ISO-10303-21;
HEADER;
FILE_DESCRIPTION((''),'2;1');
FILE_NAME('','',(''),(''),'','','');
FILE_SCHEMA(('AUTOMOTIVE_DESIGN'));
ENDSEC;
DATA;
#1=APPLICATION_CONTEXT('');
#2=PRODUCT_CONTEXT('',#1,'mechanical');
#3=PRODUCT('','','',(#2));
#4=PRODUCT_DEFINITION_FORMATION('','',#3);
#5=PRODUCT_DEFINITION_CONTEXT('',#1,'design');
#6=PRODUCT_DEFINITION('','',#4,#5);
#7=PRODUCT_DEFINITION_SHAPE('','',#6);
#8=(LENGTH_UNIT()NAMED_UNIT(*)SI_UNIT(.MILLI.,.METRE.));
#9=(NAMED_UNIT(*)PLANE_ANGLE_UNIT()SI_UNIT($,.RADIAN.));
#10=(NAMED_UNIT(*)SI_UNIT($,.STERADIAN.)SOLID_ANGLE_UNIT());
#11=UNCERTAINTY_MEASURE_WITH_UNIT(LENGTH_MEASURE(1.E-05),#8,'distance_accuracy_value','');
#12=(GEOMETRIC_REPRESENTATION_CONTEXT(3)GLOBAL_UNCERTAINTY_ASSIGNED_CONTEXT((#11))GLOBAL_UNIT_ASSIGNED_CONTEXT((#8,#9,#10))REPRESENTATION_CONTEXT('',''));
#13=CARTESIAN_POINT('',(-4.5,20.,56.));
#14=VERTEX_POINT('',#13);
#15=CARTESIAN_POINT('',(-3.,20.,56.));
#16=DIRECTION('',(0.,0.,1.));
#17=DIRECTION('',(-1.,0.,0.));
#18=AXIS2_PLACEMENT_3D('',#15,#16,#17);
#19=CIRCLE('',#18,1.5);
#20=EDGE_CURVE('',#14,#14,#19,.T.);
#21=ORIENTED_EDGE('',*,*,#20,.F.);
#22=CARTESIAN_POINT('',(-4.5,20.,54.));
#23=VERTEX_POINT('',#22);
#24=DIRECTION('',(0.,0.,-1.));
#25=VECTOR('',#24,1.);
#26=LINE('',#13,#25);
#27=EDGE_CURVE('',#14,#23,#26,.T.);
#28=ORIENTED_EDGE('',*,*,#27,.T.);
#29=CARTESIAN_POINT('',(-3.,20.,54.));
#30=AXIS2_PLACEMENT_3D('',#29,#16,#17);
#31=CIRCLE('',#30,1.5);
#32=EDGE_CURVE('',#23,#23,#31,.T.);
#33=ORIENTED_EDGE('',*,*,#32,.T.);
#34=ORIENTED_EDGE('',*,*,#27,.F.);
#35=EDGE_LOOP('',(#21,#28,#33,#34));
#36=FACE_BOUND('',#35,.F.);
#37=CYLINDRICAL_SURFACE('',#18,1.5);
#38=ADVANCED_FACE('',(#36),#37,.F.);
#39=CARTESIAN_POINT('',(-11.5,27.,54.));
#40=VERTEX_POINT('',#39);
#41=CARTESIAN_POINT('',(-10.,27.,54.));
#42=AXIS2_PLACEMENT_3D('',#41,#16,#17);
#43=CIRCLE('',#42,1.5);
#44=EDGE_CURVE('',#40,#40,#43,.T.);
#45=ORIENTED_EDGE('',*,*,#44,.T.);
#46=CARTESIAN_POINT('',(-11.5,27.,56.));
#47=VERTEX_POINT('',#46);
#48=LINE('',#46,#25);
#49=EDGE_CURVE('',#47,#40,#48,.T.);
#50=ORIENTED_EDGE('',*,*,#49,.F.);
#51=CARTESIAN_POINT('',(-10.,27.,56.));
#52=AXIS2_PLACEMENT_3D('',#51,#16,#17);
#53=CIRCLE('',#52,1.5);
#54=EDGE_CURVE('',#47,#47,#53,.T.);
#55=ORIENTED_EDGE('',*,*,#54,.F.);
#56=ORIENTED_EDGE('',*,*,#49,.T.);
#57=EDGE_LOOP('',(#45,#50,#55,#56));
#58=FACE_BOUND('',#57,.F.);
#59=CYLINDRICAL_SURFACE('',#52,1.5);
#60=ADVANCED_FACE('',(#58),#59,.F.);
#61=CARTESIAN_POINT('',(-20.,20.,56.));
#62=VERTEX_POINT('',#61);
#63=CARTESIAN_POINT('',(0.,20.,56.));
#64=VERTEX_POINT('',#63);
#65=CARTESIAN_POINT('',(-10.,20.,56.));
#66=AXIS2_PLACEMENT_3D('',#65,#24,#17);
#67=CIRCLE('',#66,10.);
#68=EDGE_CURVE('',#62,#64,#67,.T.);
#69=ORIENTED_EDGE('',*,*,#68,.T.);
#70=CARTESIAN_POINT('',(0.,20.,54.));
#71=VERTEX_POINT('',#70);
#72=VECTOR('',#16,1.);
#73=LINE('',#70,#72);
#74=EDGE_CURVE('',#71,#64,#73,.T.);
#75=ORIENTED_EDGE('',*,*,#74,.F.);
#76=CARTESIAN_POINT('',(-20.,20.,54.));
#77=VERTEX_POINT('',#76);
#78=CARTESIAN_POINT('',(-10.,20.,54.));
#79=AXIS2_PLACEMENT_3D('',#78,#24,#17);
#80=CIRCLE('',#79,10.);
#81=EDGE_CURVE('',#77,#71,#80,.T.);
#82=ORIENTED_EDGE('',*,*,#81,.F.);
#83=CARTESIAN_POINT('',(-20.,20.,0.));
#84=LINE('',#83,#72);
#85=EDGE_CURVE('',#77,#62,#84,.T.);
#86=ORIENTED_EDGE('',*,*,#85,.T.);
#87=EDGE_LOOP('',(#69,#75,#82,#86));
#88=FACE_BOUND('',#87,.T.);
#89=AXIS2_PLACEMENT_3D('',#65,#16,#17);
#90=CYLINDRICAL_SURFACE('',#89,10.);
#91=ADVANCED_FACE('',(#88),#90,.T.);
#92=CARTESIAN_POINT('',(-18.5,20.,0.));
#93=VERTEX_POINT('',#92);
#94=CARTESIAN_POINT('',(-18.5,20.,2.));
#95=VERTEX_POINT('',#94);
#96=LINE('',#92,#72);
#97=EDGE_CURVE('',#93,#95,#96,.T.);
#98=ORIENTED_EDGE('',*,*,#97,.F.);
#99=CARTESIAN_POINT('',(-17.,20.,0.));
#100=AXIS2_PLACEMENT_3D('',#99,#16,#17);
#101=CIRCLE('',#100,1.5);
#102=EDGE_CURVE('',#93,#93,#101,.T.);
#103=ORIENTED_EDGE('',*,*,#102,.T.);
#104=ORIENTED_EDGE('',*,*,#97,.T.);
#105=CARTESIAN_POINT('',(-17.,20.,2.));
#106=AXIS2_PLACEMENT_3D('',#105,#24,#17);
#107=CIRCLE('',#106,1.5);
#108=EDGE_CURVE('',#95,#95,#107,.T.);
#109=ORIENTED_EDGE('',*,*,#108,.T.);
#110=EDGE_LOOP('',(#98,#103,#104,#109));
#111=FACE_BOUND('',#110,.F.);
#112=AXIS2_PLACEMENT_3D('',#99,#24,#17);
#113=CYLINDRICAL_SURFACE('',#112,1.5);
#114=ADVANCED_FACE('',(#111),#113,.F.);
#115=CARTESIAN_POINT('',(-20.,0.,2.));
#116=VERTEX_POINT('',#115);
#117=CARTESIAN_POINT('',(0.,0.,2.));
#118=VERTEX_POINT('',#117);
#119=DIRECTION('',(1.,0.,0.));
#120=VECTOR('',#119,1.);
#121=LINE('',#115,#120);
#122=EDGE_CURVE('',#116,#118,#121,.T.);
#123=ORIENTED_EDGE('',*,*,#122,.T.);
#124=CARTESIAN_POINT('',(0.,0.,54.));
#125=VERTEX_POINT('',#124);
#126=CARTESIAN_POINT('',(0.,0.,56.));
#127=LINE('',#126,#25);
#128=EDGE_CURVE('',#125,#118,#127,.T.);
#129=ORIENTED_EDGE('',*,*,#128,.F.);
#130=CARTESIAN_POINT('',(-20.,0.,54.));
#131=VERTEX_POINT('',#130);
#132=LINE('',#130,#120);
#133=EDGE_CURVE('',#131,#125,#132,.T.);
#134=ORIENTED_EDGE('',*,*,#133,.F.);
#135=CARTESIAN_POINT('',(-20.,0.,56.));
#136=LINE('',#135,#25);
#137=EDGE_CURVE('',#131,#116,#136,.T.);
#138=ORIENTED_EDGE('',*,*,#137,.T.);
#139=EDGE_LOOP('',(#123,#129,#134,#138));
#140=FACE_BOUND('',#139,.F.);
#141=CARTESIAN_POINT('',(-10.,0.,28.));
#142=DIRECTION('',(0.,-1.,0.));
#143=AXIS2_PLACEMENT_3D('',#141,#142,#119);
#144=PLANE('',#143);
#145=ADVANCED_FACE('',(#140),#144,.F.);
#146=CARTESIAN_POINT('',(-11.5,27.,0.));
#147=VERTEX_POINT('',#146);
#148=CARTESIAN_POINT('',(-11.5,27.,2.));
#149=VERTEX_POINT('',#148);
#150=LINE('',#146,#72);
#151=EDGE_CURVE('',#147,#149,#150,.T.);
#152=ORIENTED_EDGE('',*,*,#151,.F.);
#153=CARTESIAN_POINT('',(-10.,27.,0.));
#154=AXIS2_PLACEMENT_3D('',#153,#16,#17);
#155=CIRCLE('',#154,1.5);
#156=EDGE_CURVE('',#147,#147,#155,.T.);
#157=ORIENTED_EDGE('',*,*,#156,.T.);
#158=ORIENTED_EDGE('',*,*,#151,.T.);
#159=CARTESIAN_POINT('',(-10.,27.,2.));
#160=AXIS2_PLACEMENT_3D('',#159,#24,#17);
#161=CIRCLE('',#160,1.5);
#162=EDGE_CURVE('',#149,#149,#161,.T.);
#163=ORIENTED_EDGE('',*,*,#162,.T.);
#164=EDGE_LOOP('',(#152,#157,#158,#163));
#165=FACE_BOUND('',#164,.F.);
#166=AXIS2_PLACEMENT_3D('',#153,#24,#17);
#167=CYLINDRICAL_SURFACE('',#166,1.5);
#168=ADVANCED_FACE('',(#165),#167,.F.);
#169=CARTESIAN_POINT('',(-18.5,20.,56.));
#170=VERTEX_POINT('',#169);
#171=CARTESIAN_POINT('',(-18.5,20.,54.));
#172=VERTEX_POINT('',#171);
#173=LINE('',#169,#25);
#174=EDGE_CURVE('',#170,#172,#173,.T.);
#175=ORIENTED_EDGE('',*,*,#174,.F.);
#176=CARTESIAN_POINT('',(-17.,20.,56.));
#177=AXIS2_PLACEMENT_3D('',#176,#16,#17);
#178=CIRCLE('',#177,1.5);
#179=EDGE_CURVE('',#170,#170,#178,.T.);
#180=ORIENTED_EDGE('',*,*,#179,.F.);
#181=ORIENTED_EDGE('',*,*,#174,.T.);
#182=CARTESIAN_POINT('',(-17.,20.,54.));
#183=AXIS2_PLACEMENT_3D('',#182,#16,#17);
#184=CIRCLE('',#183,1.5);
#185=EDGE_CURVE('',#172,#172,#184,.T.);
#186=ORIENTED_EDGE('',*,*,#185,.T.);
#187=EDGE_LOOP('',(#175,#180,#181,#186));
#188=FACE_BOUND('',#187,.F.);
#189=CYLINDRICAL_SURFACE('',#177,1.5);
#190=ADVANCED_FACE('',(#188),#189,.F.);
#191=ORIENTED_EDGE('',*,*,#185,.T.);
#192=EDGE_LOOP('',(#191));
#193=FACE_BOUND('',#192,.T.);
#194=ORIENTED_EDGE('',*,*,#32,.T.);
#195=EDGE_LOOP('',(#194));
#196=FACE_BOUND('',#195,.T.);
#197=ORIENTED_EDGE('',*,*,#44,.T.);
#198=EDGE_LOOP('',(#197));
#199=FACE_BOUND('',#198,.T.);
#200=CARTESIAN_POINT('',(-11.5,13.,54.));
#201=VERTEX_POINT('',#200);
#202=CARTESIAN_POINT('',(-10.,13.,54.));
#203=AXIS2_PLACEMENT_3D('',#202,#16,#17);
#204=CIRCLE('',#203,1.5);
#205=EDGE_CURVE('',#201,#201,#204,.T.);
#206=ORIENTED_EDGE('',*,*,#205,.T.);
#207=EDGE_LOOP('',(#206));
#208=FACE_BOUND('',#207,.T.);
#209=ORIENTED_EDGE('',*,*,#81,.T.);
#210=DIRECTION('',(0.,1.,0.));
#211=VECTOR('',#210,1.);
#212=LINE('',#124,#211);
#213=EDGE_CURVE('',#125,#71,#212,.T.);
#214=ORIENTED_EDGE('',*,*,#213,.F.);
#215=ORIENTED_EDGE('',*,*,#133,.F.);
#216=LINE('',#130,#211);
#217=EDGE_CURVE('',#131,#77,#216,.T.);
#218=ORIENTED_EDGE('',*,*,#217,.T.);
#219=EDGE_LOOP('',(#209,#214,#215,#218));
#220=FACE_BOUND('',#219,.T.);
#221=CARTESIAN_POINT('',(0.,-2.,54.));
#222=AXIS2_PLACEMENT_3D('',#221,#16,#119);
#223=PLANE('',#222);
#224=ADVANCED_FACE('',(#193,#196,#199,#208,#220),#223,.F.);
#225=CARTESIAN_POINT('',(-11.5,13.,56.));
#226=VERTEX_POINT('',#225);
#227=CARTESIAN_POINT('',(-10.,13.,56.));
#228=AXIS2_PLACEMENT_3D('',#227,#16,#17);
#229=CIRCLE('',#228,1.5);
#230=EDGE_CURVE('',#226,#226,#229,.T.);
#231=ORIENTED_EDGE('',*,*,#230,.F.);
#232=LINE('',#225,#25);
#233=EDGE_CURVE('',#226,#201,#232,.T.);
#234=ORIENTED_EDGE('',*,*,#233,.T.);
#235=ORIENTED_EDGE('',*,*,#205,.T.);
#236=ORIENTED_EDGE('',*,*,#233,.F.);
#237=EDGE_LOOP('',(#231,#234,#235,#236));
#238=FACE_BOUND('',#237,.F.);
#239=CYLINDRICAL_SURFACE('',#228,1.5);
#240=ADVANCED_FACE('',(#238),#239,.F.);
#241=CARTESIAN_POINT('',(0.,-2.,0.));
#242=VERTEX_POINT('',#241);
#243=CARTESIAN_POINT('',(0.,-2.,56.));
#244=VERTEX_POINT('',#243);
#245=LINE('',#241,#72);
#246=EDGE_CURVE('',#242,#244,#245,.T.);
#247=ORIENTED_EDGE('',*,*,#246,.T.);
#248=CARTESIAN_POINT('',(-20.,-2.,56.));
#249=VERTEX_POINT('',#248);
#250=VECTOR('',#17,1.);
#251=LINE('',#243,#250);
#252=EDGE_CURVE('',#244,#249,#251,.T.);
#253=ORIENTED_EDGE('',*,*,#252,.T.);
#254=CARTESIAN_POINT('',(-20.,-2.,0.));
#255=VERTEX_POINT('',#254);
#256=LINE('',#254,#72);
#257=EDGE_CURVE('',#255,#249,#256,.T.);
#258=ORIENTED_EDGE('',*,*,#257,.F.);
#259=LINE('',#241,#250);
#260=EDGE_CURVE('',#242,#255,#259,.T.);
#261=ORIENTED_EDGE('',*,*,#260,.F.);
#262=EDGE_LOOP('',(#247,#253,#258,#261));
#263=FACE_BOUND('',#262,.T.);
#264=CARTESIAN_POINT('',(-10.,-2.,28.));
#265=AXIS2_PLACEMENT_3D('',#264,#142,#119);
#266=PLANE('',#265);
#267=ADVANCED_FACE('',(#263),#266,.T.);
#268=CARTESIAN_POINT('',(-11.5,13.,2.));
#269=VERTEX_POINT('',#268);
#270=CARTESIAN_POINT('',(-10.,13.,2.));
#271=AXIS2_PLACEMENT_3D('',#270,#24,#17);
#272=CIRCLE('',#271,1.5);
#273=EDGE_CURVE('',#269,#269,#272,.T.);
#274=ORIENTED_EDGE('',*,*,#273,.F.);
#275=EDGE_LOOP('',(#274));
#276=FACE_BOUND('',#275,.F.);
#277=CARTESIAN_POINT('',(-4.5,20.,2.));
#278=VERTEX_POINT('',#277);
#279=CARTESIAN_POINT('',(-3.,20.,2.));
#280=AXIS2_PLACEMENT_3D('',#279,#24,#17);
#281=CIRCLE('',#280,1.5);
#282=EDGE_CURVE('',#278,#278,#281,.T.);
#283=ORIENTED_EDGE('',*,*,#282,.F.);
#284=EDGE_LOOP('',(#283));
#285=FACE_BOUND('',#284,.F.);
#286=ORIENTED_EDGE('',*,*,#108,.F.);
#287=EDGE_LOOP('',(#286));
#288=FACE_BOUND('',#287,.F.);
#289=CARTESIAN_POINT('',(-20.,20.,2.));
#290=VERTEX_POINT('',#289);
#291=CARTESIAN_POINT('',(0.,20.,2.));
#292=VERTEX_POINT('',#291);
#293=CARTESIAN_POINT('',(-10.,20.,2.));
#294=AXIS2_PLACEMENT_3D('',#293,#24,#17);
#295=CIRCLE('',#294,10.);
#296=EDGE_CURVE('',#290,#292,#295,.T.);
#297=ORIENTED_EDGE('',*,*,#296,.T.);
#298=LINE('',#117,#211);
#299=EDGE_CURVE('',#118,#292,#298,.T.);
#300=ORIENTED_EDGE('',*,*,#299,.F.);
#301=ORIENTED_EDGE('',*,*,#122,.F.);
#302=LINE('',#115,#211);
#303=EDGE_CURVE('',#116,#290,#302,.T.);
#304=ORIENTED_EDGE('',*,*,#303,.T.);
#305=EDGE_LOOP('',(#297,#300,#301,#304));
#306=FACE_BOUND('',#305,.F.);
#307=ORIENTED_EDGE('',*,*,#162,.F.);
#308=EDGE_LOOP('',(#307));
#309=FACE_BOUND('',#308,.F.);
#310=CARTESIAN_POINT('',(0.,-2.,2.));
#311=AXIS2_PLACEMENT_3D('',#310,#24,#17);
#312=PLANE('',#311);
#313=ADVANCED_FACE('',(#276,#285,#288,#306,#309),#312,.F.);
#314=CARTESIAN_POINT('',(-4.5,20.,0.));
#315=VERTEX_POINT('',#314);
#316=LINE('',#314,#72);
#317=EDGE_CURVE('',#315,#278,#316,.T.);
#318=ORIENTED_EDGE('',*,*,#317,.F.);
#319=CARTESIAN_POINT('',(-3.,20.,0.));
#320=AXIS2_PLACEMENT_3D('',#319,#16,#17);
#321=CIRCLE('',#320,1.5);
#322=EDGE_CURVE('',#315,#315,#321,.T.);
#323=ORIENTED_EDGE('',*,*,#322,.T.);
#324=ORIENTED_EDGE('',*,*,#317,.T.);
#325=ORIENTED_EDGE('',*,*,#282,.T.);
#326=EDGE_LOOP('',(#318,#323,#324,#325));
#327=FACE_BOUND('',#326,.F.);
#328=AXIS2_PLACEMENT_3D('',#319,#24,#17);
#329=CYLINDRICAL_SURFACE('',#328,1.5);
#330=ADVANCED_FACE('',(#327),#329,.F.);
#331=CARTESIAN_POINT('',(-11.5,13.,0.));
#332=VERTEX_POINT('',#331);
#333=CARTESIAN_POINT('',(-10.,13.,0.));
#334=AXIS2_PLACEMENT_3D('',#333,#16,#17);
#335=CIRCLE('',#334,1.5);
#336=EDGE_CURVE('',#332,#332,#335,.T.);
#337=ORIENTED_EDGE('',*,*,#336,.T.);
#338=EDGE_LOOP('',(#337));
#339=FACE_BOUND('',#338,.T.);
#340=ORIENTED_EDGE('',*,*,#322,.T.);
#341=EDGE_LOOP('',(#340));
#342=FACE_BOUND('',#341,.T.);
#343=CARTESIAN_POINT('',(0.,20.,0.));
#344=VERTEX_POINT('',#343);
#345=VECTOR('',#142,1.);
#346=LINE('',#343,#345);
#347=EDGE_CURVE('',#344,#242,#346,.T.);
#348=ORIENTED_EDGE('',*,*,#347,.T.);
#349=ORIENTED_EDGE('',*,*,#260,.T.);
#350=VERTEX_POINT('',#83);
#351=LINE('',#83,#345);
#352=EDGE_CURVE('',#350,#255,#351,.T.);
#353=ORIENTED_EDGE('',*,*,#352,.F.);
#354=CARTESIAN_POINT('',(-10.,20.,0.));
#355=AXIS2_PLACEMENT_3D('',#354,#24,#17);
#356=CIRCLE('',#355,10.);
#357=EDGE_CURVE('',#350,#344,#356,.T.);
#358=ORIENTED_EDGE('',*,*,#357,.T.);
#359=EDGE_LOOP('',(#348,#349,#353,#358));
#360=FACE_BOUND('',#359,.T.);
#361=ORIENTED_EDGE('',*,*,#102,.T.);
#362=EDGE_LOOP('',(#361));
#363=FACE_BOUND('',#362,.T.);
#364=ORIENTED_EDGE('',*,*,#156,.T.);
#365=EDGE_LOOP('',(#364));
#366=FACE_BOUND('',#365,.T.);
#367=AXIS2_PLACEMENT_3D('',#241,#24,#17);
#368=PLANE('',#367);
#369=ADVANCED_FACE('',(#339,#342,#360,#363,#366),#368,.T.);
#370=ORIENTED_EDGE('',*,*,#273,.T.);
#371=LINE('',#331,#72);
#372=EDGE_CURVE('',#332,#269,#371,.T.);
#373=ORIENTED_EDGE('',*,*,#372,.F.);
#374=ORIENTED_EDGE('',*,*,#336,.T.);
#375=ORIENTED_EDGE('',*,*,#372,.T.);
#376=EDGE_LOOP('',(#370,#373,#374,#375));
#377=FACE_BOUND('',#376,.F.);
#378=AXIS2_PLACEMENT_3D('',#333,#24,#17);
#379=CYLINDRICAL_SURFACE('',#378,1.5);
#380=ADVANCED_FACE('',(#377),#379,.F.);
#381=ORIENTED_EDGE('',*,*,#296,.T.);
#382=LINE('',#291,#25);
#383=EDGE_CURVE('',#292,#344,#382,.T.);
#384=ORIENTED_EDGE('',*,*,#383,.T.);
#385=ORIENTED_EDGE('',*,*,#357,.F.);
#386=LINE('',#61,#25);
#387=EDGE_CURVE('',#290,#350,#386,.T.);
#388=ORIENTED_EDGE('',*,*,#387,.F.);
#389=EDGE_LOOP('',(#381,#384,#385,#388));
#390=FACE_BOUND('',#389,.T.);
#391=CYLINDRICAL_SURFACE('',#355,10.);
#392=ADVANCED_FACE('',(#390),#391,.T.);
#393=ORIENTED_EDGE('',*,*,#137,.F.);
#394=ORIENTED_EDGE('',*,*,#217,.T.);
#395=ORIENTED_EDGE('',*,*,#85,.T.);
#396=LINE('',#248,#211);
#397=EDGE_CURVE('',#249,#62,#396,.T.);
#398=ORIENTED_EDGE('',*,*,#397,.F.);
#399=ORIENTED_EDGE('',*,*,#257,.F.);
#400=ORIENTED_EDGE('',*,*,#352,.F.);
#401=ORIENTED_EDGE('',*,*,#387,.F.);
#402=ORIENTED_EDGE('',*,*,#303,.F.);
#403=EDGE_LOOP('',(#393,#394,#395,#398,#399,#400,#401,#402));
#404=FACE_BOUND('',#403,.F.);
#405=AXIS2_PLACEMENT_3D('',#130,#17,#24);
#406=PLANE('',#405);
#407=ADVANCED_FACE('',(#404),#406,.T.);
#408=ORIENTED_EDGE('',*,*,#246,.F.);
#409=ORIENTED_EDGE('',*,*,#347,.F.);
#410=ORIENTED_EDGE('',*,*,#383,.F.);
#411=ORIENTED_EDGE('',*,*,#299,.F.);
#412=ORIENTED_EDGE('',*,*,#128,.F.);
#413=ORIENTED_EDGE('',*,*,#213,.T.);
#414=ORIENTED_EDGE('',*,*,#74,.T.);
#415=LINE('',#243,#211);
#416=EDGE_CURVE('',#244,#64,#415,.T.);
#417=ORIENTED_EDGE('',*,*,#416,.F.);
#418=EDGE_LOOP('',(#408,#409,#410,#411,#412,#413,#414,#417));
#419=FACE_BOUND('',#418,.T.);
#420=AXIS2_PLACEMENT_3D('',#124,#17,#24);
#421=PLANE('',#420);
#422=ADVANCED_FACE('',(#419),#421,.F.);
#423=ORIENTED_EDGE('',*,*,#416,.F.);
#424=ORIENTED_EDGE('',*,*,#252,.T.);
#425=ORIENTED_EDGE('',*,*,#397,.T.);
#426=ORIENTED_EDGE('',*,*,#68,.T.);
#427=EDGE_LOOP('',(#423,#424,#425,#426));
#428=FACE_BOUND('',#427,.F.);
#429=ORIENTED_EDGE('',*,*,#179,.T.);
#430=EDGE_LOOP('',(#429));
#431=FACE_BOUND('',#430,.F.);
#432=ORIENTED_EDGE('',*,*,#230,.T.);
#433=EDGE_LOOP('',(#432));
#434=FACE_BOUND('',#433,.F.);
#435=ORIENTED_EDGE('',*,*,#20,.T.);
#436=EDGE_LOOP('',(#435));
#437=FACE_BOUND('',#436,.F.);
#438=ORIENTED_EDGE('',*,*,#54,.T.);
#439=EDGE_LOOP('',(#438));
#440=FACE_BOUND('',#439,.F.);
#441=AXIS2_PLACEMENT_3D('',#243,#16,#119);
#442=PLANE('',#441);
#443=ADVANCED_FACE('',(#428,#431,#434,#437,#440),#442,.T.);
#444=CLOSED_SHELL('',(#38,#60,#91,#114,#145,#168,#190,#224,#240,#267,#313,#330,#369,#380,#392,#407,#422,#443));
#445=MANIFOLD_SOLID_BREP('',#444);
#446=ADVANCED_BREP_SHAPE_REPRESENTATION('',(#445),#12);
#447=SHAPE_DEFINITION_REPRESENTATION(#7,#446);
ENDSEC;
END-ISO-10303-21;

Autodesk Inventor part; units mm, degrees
ref_plane "YZ Plane" through (0, 0, 0) normal (1, 0, 0) x (0, 1, 0)
ref_plane "XZ Plane" through (0, 0, 0) normal (0, 1, 0) x (-1, 0, 0)
ref_plane "Work Plane1" through (-10, 0, 28) normal (0, -1, 0) x (1, 0, 0)
sketch "Sketch3" plane through (-10, 0, 28) normal (0, -1, 0) x (1, 0, 0)
  line L0 (-10, -28) -> (10, -28)
  line L1 (10, -28) -> (10, 28)
  line L2 (10, 28) -> (-10, 28)
  line L3 (-10, 28) -> (-10, -28)
  line L4 (10, 28) -> (-10, 28)
  line L5 (-10, 28) -> (-10, 31)
  line L6 (-10, 31) -> (10, 31)
  line L7 (10, 31) -> (10, 28)
  line L8 (10, -28) -> (-10, -28)
  line L9 (-10, -28) -> (-10, -31)
  line L10 (-10, -31) -> (10, -31)
  line L11 (10, -31) -> (10, -28)
  line L12 (10, 28) -> (5, 28)
  line L13 (5, 28) -> (5, -28)
  line L14 (-10, 28) -> (-5, 28)
  line L15 (-5, 28) -> (-5, -28)
  line L16 (5, 28) -> (5, 14)
  circle A0 centre (5, 14) radius 1.5
  line L17 (5, 14) -> (5, 4)
  circle A1 centre (5, 4) radius 1.5
  line L18 (10, 28) -> (10, 0)
  line L19 (10, 0) -> (-10, 0)
  circle A2 centre (0, 0) radius 3
  line L20 (0, 28) -> (0, -28)
  circle A3 centre (-5, 4) radius 1.5
  circle A4 centre (-5, 14) radius 1.5
  circle A5 centre (5, -14) radius 1.5
  circle A6 centre (5, -4) radius 1.5
  circle A7 centre (-5, -4) radius 1.5
  circle A8 centre (-5, -14) radius 1.5
  point P0 (10, -28)
  point P1 (-10, 28)
  dimension "d13" = 20
  dimension "d14" = 56
  dimension "d15" = 3
  dimension "d16" = 3
  dimension "d17" = 5
  dimension "d18" = 5
  dimension "d19" = 14
  dimension "d20" = 3
  dimension "d21" = 10
  dimension "d22" = 3
  dimension "d23" = 6
extrude "Extrusion2" add sketch "Sketch3" along normal blind 2 contours L3 L19 L15 A7 A8 L0 | L15 A8 A7 L19 A2 L20 L0 | L3 L2 L15 A4 A3 L19 | L20 A2 L19 L13 A6 A5 L0 | A8 L15 | L15 A8 | L15 A3 A4 L2 L20 A2 L19 | L13 A5 A6 L19 L1 L0 | L20 L19 A2 | A2 L19 L20 | A3 L15 | L15 A3 | A7 L15 | L15 A7 | A2 L20 L19 | A5 L13 | L13 A5 | A2 L20 L2 L13 A0 A1 L19 | L19 L20 A2 | A4 L15 | L15 A4 | L19 L13 A1 A0 L2 L1 | A6 L13 | L13 A6 | A1 L13 | L13 A1 | A0 L13 | L13 A0
sketch "Sketch5" plane through (-10, 0, 28) normal (0, 1, 0) x (1, 0, 0)
  line L0 (-10, -28) -> (-10, 28) projected
  line L1 (10, 28) -> (-10, 28)
  line L2 (-10, 28) -> (-10, 26)
  line L3 (-10, 26) -> (10, 26)
  line L4 (10, 26) -> (10, 28)
  line L5 (10, 28) -> (10, -28) projected
  line L6 (10, -28) -> (-10, -28)
  line L7 (-10, -28) -> (-10, -26)
  line L8 (-10, -26) -> (10, -26)
  line L9 (10, -26) -> (10, -28)
  dimension "d26" = 2
  dimension "d27" = 2
extrude "Extrusion3" add sketch "Sketch5" along normal blind 20 contours L0 L1 L4 L3
sketch "Sketch6" plane through (0, -2, 0) normal (0, 0, -1) x (-1, 0, 0)
  line L0 (0, 22) -> (20, 22) projected
  circle A0 centre (10, 22) radius 10
  point P0 (0, 2)
extrude "Extrusion4" add sketch "Sketch6" against normal up to surface (2 mm away) contours A0 L0 picked at (13.2365, 22.7977)
sketch "Sketch7" plane through (0, -2, 0) normal (0, 0, -1) x (-1, 0, 0)
  arc A0 (20, 22) -> (0, 22) centre (10, 22) ccw projected
  circle A1 centre (10, 22) radius 7
  circle A2 centre (10, 15) radius 1.5
  circle A3 centre (3, 22) radius 1.5
  circle A4 centre (10, 29) radius 1.5
  circle A5 centre (17, 22) radius 1.5
  point P0 (0, 2)
  dimension "d32" = 14
  dimension "d33" = 3
  dimension "d34" = 3
  dimension "d35" = 3
  dimension "d36" = 3
extrude "Extrusion5" cut sketch "Sketch7" against normal blind 10 contours A1 A5 | A1 A5 | A4 A1 | A1 A4 | A2 A1 | A1 A2 | A3 A1 | A1 A3
ref_plane "Work Plane2" through (-20, 0, 28) normal (0, 0, 1) x (1, 0, 0)
mirror "Mirror1" about plane through (-20, 0, 28) normal (0, 0, 1) of "Extrusion4", "Extrusion5", "Extrusion3"
properties part number "Bracket"
